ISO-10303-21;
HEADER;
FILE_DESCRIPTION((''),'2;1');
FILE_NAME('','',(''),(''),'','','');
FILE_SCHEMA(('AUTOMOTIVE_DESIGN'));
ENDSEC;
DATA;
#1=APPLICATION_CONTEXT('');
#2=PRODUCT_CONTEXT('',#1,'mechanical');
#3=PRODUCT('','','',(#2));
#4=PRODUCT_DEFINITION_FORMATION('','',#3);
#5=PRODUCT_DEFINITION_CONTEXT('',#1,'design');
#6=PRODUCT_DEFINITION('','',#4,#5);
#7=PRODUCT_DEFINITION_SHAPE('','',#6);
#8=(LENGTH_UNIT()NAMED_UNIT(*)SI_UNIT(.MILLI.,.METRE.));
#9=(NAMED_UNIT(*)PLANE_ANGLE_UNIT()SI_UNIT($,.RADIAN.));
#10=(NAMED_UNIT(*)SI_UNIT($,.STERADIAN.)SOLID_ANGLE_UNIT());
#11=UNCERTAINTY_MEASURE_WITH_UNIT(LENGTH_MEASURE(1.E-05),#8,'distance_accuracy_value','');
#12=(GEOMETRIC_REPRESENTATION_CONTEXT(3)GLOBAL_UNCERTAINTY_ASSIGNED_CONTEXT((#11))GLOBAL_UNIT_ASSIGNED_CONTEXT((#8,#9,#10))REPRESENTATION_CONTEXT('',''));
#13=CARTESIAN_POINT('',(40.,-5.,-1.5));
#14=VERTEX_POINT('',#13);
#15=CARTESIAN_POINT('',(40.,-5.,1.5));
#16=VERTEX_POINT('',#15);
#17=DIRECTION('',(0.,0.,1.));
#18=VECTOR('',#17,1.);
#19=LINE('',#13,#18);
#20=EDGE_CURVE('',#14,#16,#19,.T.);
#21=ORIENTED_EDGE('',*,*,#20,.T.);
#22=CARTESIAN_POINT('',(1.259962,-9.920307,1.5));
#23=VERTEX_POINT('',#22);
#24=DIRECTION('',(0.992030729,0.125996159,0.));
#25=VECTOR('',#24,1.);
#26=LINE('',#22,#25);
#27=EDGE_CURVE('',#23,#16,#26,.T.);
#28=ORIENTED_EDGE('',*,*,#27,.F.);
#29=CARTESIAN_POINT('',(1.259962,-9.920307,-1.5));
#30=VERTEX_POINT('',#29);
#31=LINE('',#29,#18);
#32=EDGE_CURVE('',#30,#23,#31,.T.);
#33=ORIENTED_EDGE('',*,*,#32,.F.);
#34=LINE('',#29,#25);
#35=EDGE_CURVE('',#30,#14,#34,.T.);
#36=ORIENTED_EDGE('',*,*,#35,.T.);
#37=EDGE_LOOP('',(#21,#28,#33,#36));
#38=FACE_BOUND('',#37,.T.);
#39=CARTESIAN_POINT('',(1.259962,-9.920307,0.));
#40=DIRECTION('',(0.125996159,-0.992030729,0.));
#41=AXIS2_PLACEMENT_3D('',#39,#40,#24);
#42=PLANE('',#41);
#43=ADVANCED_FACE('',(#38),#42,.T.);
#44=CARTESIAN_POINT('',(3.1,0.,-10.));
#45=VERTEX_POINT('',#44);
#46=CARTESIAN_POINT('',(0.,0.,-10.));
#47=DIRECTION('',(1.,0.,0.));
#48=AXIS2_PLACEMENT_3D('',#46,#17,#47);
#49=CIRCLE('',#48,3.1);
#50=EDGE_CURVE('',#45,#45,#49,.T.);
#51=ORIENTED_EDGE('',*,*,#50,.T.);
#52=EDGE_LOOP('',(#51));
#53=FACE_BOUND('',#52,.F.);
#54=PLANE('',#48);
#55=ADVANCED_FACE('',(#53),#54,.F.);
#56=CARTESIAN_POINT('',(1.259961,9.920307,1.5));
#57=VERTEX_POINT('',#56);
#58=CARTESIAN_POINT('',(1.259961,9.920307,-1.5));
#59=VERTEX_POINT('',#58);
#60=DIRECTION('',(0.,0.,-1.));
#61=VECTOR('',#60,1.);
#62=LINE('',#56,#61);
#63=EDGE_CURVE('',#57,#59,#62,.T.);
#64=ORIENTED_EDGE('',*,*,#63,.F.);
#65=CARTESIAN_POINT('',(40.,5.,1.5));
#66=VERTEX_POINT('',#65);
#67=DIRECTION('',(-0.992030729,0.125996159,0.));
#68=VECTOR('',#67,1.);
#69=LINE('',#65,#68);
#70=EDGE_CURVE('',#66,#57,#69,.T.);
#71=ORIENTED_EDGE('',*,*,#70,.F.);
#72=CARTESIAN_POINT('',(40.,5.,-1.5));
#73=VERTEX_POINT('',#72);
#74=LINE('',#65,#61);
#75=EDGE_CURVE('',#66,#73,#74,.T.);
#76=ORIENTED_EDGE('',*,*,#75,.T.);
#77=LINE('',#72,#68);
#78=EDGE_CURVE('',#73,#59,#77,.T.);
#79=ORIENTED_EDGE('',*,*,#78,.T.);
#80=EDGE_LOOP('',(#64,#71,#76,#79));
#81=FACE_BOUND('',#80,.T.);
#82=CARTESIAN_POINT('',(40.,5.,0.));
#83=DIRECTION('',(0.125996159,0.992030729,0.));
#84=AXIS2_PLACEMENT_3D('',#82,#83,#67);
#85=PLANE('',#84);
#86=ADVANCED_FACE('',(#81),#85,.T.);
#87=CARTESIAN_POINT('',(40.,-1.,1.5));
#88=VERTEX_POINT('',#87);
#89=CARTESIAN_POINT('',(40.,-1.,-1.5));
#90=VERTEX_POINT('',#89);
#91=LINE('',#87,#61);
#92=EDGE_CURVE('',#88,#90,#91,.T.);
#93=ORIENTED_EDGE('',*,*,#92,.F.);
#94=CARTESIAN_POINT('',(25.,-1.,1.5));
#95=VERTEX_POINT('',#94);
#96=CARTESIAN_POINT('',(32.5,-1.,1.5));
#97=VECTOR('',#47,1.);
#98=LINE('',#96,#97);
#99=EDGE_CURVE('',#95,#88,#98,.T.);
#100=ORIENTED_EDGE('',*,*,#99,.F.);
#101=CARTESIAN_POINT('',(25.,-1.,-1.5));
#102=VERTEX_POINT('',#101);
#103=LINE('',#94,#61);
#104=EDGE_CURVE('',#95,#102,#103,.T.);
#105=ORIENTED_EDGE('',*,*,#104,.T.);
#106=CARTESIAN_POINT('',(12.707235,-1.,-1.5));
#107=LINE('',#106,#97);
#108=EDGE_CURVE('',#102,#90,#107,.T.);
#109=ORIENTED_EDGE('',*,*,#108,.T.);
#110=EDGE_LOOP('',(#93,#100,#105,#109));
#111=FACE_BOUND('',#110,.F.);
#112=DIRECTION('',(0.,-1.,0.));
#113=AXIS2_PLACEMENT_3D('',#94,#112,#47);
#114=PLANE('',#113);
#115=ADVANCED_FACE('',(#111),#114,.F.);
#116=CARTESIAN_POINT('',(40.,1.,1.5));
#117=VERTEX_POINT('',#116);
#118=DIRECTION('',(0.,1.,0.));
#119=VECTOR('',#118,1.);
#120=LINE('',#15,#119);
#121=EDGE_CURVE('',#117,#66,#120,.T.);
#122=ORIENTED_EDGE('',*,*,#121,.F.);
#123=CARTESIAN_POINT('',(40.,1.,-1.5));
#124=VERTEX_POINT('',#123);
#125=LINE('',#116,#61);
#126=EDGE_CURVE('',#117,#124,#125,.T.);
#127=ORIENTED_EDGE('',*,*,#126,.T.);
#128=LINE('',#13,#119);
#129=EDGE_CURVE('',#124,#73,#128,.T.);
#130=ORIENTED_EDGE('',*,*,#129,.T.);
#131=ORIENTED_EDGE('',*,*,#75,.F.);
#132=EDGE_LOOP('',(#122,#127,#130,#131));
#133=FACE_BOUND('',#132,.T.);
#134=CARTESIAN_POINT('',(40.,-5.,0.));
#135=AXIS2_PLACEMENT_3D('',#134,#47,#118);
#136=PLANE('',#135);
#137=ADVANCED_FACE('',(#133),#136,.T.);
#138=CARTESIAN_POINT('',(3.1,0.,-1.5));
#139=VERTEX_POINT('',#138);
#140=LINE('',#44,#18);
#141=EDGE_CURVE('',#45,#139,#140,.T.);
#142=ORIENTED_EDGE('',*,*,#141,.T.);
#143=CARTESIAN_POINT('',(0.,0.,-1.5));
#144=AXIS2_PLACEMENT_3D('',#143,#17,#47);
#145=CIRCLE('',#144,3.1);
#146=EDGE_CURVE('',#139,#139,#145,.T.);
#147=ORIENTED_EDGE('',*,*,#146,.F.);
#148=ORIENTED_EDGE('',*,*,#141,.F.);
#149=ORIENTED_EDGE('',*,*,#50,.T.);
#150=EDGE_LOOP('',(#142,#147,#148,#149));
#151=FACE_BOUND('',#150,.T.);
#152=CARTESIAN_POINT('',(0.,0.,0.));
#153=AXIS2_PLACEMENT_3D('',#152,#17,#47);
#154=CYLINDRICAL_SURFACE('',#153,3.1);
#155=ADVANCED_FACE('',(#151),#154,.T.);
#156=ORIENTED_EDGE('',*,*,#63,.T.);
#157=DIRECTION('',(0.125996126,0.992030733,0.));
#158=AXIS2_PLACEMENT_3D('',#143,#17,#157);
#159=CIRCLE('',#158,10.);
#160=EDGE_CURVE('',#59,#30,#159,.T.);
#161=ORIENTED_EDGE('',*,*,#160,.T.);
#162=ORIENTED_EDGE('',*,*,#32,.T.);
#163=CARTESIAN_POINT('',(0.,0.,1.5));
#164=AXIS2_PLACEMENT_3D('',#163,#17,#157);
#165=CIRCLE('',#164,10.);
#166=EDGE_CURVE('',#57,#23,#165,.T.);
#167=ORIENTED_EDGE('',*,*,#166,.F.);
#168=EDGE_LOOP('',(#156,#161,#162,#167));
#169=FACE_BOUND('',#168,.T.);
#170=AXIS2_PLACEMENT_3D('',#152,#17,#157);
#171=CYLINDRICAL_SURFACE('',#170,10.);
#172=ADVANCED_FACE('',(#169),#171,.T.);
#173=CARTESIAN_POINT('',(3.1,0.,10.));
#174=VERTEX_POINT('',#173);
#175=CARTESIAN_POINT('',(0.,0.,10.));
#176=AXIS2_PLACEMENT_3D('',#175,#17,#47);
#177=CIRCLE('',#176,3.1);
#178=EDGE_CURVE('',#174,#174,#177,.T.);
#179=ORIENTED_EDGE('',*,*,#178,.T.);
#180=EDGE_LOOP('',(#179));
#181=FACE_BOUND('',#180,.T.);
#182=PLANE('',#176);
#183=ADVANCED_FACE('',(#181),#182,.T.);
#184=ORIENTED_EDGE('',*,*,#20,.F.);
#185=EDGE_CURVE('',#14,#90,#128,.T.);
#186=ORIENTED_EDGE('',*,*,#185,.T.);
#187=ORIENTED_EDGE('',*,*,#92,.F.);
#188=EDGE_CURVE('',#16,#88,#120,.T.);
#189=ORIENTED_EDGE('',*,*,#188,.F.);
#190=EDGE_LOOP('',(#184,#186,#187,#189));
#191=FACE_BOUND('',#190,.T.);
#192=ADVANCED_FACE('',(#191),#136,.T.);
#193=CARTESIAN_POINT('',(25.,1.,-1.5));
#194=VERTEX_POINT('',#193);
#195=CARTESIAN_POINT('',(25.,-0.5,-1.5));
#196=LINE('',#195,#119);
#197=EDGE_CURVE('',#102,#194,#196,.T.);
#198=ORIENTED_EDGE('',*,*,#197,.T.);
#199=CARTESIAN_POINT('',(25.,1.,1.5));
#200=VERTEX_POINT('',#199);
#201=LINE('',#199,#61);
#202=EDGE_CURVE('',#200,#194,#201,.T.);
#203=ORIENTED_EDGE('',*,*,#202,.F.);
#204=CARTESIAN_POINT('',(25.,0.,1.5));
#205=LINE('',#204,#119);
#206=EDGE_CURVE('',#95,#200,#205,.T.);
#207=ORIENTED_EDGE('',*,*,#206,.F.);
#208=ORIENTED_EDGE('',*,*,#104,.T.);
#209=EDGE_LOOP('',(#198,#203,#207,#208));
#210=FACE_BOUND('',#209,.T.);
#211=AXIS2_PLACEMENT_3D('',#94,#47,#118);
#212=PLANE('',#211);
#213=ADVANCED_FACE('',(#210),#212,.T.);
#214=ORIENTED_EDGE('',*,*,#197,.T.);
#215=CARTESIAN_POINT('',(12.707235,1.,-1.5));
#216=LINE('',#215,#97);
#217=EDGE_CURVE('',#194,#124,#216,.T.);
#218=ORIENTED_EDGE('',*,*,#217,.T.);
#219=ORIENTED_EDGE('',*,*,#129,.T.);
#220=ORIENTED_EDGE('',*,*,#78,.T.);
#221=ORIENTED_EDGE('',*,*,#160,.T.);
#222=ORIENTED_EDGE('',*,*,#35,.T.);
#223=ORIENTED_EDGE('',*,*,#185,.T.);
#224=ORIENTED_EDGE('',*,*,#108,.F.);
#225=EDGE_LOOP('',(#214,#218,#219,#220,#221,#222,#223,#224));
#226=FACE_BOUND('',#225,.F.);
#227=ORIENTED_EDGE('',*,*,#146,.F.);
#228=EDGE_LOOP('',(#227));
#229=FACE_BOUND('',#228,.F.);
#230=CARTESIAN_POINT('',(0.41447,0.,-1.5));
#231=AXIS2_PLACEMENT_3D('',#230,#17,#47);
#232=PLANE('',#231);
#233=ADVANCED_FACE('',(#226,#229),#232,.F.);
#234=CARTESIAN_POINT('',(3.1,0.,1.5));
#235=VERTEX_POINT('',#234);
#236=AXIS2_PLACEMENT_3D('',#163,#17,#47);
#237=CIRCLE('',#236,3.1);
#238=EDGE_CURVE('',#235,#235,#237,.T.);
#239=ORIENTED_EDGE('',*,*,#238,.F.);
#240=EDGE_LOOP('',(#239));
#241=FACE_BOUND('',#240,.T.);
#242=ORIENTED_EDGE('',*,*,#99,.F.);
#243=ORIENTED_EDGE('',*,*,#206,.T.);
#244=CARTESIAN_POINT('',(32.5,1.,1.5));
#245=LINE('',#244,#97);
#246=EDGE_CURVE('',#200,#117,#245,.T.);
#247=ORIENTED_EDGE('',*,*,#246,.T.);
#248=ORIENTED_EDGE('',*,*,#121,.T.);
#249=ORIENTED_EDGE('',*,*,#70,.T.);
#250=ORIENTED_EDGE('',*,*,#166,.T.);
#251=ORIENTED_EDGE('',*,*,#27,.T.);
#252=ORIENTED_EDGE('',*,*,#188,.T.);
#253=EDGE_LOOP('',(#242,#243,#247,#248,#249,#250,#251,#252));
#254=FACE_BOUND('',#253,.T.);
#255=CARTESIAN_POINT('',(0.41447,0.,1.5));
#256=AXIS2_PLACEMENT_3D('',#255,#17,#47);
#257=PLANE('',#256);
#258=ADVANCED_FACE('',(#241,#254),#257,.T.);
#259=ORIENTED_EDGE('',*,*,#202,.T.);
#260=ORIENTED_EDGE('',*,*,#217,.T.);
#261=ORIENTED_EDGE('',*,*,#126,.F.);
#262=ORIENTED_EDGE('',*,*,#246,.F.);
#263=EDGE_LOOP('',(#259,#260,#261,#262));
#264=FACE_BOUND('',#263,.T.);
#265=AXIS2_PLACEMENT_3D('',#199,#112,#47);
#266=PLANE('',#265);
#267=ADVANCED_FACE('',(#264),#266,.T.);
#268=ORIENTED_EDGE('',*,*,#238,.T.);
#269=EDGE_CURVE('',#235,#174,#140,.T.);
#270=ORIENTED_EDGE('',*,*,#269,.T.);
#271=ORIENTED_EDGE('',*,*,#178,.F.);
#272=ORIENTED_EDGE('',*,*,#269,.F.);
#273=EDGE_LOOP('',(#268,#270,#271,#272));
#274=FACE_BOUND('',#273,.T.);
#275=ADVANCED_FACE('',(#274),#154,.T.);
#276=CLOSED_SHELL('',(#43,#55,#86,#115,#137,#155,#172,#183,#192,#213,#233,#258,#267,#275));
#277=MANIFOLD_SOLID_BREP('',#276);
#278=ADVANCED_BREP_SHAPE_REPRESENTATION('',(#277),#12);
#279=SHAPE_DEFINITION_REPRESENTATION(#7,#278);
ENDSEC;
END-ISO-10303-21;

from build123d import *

# Parameters (mm, degrees)
F0_R     = 3.1
F1_DEPTH = 10
F2_DEPTH = 1.5
F3_W     = 15
F3_H     = 2
F4_DEPTH = 11.501


# Not quite as in the source:
# - a feature names something its author has since deleted; it is built from what else it names


with BuildPart() as f1:
    # F0 (on Top) → F1 (new body, symmetric)
    with BuildSketch(Plane.XY):
        Circle(F0_R)
    extrude(amount=F1_DEPTH, both=True)

    # F0 (on Top) → F2 (join, symmetric)
    with BuildSketch(Plane.XY):
        with BuildLine():
            ThreePointArc((1.2599617485, -9.9203072731), (7.5033198481, -6.6106120184), (10, 0))
            ThreePointArc((10, 0), (7.503319686, 6.6106122023), (1.2599612621, 9.9203073349))
            ThreePointArc((1.2599612621, 9.9203073349), (-10, -2.451e-07), (1.2599617485, -9.9203072731))
        make_face()
        Circle(F0_R, mode=Mode.SUBTRACT)
        with BuildLine():
            ThreePointArc((1.2599612621, 9.9203073349), (7.503319686, 6.6106122023), (10, 0))
            ThreePointArc((10, 0), (7.5033198481, -6.6106120184), (1.2599617485, -9.9203072731))
            Line((1.2599617485, -9.9203072731), (40, -5))
            Line((40, -5), (40, 5))
            Line((40, 5), (1.2599612621, 9.9203073349))
        make_face()
    extrude(amount=F2_DEPTH, both=True)

    # F3 (on face) → F4 (cut, through all)
    with BuildSketch(Plane.XY.offset(1.5)):
        with Locations((32.5, 0)):
            Rectangle(F3_W, F3_H)
    extrude(amount=-F4_DEPTH, mode=Mode.SUBTRACT)


solid = f1.part
